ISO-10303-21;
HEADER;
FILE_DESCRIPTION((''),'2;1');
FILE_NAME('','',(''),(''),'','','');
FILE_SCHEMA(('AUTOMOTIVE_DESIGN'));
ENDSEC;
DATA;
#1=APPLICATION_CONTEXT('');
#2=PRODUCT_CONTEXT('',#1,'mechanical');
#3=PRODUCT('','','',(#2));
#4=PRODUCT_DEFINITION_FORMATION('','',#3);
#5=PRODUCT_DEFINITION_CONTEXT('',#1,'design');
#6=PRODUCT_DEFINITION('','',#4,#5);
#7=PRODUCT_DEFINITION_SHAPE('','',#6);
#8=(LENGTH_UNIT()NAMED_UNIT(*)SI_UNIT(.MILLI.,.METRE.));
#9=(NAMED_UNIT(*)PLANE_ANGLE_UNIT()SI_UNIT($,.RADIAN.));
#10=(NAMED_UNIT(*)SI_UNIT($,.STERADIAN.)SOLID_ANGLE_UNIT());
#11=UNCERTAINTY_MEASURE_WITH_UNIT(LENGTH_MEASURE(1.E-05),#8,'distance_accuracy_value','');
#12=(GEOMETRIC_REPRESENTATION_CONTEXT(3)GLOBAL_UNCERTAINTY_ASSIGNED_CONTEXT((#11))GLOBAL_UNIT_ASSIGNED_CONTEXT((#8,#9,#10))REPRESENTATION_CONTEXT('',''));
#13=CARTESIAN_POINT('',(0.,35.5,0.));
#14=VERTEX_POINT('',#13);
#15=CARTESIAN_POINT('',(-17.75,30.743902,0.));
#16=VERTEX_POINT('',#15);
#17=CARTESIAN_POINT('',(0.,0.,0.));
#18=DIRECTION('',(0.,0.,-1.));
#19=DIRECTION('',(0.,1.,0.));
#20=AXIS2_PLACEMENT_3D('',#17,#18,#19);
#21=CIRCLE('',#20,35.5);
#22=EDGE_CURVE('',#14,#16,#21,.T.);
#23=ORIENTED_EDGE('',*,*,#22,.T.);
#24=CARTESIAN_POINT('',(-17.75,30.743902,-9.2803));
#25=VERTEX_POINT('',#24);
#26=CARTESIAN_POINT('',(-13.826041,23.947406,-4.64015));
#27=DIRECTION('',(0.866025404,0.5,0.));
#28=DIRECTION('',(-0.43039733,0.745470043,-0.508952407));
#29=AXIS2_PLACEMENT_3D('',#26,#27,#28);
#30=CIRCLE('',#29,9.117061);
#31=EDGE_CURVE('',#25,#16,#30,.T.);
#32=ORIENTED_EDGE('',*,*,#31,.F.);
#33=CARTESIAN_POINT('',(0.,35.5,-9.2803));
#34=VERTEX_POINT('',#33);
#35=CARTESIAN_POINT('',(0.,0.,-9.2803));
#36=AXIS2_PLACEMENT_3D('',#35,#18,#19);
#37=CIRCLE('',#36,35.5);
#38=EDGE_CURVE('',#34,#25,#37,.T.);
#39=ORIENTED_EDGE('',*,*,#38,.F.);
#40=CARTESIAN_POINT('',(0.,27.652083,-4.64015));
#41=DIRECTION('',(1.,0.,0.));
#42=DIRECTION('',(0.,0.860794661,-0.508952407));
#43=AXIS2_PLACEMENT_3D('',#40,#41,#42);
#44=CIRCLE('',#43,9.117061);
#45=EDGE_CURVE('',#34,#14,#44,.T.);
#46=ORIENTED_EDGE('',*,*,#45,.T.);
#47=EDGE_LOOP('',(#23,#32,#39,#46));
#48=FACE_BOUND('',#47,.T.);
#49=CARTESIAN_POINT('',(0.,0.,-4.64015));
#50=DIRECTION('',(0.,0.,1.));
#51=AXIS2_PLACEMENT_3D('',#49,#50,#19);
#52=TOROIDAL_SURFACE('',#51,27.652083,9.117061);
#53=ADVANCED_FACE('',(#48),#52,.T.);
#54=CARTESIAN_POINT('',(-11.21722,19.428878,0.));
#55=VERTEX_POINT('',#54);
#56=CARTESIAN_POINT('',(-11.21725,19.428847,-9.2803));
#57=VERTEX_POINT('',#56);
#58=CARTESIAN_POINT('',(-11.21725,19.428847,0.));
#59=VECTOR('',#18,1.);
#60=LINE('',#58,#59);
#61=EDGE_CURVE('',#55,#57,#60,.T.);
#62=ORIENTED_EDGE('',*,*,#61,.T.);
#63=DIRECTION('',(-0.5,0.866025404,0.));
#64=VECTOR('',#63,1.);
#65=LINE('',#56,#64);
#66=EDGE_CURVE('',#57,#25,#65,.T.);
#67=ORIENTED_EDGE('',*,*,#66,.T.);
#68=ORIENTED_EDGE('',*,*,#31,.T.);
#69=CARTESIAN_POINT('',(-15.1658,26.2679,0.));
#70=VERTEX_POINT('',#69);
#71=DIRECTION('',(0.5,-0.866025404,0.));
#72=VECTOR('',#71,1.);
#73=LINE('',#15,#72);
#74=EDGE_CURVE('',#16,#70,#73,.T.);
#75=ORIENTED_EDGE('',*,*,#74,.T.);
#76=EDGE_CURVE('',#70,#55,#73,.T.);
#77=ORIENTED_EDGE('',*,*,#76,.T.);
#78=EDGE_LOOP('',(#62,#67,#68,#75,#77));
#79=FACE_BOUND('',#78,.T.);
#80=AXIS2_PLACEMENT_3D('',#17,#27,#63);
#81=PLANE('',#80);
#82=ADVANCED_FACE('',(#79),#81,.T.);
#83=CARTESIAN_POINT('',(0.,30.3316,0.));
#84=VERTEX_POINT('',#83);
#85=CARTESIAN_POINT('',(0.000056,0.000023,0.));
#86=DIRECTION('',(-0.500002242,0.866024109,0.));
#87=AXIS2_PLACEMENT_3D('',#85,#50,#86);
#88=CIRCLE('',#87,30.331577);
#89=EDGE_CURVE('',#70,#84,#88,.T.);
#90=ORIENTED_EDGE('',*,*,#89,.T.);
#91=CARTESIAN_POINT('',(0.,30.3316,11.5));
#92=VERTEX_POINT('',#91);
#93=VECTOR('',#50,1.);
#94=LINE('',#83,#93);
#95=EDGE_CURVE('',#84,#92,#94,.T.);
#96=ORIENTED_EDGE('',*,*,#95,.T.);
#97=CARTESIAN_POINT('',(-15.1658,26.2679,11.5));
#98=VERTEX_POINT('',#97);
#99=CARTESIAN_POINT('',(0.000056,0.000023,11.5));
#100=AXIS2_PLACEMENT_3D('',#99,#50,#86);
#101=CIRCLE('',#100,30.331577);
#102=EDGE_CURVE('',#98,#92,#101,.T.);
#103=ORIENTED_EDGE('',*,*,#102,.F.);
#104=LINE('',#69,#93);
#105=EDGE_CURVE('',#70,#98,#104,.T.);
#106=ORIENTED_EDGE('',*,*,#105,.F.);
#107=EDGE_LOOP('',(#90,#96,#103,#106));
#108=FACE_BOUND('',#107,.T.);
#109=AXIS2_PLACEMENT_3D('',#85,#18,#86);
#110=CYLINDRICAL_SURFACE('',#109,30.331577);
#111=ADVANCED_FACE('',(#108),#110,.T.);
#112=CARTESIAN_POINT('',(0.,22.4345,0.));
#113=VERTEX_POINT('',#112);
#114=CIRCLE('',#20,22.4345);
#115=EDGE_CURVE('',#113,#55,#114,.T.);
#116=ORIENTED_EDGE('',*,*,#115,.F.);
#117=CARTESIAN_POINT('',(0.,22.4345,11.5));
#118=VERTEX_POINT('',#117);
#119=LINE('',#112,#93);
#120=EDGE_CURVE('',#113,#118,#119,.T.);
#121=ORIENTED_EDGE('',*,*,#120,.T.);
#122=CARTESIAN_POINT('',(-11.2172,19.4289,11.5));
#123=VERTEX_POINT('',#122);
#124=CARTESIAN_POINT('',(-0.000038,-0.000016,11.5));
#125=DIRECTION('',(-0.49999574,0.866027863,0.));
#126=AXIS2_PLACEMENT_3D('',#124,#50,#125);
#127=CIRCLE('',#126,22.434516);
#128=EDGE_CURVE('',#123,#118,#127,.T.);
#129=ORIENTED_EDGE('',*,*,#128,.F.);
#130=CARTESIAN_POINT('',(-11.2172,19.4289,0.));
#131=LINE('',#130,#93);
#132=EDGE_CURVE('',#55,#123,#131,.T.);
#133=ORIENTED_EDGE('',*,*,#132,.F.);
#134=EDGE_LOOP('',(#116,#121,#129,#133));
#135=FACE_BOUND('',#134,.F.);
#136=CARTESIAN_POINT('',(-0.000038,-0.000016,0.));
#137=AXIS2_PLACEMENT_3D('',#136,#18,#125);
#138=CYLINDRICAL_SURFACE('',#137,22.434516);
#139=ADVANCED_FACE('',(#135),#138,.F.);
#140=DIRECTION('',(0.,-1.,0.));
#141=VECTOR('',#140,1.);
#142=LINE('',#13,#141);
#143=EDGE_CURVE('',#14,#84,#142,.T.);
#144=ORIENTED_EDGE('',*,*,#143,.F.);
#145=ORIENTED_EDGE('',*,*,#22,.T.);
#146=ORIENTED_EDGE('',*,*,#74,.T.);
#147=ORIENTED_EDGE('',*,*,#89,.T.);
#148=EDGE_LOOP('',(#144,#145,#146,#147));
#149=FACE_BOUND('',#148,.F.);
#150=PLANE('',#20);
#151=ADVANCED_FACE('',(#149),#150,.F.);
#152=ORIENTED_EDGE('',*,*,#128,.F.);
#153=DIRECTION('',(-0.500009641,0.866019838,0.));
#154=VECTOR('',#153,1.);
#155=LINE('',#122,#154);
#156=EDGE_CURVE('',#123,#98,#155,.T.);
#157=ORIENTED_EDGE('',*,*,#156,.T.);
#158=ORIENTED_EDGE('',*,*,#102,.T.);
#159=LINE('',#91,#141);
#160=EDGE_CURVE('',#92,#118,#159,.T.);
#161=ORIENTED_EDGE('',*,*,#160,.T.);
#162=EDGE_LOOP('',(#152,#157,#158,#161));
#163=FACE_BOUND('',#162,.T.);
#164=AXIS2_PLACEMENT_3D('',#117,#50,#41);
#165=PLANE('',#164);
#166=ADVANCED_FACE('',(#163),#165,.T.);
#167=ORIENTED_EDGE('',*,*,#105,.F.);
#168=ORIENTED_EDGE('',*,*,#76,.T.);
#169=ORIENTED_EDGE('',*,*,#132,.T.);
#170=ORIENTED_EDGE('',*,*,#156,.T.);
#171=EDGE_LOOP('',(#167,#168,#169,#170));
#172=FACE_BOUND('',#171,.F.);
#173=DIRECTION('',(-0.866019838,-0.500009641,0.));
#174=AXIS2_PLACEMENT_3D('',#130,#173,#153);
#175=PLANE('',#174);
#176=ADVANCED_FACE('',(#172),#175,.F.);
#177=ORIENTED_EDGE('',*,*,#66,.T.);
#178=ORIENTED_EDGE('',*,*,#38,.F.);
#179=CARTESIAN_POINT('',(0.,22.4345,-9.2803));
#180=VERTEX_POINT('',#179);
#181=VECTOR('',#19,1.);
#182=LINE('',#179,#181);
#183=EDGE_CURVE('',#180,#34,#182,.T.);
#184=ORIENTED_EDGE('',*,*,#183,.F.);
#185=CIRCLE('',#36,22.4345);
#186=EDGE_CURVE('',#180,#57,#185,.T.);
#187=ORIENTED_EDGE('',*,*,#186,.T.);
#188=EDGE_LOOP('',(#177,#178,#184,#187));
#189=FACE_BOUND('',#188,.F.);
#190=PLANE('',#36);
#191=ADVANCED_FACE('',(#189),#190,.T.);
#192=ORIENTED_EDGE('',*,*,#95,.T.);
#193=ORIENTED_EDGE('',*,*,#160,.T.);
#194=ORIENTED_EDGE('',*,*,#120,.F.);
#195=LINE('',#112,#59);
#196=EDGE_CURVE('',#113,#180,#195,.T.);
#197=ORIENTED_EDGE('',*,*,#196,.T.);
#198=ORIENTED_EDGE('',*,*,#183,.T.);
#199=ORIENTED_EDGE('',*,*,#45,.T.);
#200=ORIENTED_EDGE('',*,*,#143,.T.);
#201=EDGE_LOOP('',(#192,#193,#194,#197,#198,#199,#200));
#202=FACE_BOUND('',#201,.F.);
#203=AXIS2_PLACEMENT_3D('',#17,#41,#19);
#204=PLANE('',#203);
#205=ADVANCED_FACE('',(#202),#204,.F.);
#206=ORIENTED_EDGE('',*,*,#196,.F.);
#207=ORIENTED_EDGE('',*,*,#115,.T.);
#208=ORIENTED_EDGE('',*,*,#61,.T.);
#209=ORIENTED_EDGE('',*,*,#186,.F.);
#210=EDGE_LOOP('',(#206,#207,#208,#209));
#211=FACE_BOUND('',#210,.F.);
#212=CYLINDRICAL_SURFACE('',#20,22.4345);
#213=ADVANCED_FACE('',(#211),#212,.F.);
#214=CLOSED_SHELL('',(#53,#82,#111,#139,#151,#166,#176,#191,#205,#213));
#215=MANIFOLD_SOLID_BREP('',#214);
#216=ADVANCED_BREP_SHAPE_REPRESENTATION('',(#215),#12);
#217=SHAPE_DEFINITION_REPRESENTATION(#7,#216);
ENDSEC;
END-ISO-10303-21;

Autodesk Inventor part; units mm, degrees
ref_plane "YZ Plane" through (0, 0, 0) normal (1, 0, 0) x (0, 1, 0)
ref_plane "XZ Plane" through (0, 0, 0) normal (0, 1, 0) x (-1, 0, 0)
ref_plane "XY Plane" through (0, 0, 0) normal (0, 0, 1) x (1, 0, 0)
sketch "Sketch1" plane through (0, 0, 0) normal (1, 0, 0) x (0, 1, 0)
  line L0 (0, 0) -> (0, -41.9923)
  line L1 (35.5, 0) -> (22.4345, 0)
  line L2 (22.4345, 0) -> (22.4345, -9.2803)
  line L3 (22.4345, -9.2803) -> (35.5, -9.2803)
  arc A0 (35.5, -9.2803) -> (35.5, 0) centre (27.6519, -4.6401) ccw
revolve "Revolution1" add sketch "Sketch1" angle 330 about axis through (0, 0, 0) along (0, 0, -1)
sketch "Sketch2" plane through (0, 22.4345, 0) normal (0, 0, 1) x (1, 0, 0)
  arc A0 (-11.2172, -3.0056) -> (0, 0) centre (0, -22.4345) ccw projected
  arc A1 (-15.1658, 3.8334) -> (0, 7.8971) centre (0, -22.4345) ccw
  line L0 (-11.2172, -3.0056) -> (-15.1658, 3.8334)
  line L1 (-17.75, 8.3094) -> (-11.2172, -3.0056) projected
  line L2 (0, 7.8971) -> (0, 0)
  point P0 (0, -22.4345)
extrude "Extrusion1" add sketch "Sketch2" along normal blind 11.5
properties part number "SPRING SUPPORT"
